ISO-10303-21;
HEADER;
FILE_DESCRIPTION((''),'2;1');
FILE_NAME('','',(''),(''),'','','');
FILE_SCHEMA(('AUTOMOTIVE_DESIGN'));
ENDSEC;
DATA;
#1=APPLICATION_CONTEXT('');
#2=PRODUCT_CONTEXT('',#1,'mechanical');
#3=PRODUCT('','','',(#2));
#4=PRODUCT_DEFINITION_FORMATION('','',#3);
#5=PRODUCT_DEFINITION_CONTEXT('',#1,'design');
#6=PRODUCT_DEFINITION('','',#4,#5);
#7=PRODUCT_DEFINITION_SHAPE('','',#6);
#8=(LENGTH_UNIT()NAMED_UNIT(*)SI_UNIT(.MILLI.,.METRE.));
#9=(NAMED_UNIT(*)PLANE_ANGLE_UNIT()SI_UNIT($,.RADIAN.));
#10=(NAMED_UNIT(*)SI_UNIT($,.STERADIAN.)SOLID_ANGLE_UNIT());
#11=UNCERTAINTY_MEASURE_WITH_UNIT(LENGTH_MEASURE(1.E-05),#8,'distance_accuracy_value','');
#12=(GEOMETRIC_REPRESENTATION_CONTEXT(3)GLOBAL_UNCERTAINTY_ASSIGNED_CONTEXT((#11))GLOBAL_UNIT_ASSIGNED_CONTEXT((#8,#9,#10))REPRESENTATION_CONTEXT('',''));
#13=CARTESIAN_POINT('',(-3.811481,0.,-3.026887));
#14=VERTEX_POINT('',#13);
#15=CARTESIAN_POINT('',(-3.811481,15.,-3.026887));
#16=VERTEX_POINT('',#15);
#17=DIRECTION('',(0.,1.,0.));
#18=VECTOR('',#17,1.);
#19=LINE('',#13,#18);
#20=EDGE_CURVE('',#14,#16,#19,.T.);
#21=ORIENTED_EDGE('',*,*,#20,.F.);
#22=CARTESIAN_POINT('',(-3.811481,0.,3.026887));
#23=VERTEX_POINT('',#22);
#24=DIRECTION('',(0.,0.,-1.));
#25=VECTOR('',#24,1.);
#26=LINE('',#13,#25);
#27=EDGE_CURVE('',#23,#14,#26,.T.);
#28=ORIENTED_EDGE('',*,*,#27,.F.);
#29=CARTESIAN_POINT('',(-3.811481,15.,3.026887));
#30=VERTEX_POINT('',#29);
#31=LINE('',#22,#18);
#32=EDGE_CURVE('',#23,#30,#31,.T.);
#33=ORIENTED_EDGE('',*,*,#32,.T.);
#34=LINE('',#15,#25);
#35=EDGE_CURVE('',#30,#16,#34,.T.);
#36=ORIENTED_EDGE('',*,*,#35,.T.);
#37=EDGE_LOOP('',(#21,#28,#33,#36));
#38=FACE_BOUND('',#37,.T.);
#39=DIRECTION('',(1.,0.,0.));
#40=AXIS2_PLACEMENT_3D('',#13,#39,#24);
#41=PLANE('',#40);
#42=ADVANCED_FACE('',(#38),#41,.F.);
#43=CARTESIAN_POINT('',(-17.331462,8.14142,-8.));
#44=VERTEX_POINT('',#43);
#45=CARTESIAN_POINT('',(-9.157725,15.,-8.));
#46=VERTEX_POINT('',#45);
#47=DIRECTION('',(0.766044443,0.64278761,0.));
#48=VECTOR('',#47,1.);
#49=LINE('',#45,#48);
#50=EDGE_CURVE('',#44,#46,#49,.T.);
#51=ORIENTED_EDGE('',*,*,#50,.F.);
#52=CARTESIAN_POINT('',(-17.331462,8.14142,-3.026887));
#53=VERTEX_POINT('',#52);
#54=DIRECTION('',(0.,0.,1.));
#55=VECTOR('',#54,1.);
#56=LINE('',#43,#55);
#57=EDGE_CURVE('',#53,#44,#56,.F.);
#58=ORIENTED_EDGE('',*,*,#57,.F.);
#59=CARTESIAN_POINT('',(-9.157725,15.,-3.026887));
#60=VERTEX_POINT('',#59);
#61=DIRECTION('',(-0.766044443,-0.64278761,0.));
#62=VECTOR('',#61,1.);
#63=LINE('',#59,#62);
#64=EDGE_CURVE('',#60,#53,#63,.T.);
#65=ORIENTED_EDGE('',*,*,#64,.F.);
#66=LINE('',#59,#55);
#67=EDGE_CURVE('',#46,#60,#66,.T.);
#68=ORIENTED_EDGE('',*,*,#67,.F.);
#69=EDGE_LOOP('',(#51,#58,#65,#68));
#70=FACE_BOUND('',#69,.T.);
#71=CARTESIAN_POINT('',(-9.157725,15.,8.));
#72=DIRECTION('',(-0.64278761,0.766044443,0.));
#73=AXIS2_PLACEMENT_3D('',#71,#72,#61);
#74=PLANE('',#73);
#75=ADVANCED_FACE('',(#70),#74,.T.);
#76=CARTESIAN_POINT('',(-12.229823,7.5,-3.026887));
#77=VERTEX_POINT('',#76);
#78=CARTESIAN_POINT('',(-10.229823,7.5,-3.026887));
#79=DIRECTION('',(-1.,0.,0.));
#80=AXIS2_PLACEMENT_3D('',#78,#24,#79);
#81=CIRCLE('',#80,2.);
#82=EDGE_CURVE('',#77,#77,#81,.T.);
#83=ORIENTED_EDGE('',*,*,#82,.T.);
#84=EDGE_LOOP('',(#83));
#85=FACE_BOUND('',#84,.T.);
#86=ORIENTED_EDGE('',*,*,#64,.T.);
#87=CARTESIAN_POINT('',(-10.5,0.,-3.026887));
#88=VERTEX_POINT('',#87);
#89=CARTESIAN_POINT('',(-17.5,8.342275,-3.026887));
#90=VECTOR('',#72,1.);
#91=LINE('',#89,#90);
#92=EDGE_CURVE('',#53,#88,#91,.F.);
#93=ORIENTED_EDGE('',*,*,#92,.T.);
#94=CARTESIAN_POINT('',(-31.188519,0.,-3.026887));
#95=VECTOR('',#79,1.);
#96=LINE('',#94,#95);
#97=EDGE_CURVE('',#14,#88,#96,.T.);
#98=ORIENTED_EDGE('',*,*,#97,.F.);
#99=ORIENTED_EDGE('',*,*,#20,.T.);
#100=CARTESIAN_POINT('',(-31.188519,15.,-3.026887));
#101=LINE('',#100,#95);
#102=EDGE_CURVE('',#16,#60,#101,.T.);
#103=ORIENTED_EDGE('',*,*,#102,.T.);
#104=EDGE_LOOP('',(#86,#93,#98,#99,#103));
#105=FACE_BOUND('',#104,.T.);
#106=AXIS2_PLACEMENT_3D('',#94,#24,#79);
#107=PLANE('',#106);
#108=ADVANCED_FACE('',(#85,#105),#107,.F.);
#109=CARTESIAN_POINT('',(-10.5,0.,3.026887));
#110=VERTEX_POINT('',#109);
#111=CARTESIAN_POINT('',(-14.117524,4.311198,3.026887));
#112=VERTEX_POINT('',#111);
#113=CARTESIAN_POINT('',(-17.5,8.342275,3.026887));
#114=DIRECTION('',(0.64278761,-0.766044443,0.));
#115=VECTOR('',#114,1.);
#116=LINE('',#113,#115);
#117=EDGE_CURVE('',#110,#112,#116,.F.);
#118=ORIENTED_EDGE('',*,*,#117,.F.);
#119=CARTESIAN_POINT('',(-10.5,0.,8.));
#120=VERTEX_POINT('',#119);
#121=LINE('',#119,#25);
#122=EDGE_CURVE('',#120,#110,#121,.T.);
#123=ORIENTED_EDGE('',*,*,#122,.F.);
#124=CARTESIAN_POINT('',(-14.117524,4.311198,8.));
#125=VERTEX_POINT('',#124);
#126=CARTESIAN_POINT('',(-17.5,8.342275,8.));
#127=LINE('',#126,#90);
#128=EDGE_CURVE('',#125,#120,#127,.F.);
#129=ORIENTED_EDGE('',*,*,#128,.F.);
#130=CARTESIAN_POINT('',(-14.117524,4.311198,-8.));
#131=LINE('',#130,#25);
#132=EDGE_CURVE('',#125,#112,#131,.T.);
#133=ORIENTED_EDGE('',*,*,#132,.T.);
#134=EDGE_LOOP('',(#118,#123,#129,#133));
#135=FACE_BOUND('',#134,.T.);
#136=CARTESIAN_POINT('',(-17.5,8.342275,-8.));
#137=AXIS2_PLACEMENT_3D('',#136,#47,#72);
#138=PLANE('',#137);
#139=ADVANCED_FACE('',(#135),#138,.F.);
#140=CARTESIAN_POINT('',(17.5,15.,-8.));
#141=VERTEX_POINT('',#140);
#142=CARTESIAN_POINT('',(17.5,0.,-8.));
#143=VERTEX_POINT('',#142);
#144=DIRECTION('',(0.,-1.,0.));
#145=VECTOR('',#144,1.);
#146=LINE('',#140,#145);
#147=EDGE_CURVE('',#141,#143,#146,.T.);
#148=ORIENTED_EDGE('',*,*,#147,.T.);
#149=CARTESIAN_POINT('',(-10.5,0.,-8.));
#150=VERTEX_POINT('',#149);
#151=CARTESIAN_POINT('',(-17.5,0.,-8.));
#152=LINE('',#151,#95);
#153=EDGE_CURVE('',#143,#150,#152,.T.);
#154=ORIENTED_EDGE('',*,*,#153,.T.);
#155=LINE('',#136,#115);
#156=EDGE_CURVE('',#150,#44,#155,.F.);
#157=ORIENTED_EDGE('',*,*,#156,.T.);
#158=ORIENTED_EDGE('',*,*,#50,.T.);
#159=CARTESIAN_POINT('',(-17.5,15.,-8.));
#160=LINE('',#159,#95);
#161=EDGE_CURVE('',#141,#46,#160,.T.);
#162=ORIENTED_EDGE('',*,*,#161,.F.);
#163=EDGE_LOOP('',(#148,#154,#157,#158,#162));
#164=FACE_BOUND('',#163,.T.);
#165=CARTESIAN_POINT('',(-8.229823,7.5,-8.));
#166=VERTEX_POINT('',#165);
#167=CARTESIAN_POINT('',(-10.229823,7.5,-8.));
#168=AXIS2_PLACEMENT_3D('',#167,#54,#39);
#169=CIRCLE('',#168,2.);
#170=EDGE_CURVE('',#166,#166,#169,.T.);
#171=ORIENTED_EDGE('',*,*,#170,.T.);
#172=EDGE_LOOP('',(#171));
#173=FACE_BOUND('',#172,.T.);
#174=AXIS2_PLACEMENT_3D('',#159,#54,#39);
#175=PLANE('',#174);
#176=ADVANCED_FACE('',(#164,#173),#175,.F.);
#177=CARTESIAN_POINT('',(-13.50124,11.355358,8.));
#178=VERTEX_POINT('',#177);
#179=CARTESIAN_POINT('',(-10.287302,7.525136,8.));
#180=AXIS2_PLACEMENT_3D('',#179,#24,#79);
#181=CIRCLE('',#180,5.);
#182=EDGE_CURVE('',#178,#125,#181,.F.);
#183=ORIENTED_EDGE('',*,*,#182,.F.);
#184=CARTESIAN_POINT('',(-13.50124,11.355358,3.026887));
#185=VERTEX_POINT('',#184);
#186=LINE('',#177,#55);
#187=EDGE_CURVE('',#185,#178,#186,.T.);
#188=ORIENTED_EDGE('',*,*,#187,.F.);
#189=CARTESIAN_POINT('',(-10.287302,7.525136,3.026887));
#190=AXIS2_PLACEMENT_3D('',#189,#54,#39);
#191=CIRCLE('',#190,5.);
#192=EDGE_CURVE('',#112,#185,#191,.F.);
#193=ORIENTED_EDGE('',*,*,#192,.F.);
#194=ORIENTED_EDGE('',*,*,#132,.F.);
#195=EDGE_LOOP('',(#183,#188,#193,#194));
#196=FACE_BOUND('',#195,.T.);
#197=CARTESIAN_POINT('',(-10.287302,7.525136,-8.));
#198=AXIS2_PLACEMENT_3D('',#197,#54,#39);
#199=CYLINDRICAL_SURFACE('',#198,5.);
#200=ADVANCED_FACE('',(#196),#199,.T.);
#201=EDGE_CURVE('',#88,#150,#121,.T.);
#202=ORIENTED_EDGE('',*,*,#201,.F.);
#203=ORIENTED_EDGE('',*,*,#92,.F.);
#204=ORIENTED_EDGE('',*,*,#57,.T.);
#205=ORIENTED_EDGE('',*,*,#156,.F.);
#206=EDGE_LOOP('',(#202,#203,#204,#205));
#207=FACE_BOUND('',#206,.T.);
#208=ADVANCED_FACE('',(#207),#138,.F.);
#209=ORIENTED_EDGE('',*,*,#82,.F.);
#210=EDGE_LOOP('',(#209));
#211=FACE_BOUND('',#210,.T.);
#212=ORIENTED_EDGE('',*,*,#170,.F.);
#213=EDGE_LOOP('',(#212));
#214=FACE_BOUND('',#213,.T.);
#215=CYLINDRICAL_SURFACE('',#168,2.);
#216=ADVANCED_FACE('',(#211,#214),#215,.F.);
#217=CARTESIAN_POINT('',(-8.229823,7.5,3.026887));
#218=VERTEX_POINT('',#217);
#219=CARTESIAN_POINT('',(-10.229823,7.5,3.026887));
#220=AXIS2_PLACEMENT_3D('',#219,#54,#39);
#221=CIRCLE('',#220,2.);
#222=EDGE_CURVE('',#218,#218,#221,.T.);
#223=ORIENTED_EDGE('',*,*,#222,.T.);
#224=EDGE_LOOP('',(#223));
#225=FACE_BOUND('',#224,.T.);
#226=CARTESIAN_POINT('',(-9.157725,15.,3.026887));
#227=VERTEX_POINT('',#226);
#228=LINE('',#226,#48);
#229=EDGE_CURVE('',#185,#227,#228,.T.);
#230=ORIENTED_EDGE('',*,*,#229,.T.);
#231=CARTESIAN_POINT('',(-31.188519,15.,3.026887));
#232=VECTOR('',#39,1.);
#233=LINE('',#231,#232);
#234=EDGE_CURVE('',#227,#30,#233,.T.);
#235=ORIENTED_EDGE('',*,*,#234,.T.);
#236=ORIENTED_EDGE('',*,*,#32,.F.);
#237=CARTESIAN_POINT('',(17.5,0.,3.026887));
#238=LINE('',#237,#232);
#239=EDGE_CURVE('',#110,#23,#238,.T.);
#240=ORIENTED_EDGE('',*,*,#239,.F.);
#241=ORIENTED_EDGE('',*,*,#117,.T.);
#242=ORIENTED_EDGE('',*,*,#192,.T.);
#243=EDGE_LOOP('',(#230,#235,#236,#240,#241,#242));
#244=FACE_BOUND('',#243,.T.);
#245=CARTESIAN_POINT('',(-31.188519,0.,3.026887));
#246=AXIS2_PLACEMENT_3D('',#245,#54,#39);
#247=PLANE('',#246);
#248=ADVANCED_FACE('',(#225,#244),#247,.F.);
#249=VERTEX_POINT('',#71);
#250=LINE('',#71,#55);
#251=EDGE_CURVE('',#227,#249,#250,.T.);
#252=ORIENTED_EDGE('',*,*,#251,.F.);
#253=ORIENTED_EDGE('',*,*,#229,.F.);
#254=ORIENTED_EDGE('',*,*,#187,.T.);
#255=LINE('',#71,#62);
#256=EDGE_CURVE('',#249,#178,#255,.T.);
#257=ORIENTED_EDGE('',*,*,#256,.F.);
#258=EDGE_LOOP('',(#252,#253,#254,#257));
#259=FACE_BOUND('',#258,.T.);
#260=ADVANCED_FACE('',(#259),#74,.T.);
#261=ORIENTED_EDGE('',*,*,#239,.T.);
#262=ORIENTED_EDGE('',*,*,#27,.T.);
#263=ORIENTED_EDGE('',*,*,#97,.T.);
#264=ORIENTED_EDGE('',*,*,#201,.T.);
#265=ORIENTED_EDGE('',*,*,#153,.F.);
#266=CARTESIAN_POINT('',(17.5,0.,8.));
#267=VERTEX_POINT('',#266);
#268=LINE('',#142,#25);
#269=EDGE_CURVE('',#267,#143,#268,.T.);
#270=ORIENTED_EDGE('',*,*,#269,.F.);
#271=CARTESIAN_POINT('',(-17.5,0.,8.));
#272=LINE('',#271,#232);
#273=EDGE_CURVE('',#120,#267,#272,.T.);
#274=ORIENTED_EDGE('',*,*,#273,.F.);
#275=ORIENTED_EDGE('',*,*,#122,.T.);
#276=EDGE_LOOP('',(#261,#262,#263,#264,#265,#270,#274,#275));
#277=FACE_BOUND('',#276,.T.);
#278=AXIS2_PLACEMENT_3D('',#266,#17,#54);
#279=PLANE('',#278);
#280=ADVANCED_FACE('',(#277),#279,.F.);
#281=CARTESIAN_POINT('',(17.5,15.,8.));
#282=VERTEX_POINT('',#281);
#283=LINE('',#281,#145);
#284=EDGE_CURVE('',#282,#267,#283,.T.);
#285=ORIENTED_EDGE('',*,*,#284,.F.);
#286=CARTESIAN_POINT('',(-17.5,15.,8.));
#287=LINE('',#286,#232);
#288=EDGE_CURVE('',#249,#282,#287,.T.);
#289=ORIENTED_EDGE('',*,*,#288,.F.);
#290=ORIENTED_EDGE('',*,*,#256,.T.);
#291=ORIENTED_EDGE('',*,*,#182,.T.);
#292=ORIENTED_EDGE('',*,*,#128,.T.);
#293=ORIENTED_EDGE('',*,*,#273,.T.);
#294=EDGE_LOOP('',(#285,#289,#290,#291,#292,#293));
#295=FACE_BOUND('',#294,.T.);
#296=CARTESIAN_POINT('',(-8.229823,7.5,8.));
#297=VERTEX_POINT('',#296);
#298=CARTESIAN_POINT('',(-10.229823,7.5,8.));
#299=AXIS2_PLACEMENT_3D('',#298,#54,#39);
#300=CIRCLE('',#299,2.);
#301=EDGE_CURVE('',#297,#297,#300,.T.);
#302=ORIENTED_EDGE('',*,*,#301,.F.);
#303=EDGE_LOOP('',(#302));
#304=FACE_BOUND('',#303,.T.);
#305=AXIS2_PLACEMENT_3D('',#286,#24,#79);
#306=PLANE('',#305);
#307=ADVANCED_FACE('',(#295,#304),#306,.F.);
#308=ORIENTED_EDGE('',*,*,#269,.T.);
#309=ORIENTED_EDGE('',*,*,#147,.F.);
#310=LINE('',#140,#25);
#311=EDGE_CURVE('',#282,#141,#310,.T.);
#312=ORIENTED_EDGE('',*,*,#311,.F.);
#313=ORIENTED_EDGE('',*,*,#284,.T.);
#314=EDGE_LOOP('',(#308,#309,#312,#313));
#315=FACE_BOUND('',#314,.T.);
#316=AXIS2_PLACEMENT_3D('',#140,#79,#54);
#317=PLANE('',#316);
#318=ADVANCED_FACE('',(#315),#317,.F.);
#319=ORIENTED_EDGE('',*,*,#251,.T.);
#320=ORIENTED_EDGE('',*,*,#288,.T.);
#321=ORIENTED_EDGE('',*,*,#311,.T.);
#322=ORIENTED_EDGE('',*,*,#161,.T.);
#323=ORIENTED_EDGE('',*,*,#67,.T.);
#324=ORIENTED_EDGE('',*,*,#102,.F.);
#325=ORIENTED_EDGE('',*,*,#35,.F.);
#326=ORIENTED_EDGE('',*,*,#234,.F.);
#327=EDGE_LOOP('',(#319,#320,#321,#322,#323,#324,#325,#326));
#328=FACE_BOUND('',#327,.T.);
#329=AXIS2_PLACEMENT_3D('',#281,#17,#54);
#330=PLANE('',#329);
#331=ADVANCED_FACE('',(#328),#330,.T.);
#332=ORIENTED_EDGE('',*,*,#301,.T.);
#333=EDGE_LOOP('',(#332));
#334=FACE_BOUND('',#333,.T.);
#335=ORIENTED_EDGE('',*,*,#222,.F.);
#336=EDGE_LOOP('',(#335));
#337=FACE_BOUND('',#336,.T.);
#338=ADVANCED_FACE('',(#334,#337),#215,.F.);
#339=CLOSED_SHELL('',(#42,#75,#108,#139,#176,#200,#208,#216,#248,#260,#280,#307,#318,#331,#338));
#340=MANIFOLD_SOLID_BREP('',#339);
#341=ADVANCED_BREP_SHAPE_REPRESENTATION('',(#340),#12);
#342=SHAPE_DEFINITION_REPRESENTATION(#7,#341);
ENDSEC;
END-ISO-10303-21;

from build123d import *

# Parameters (mm, degrees)
SKETCH_1_W          = 35
SKETCH_1_H          = 16
EXTRUDE_1_DEPTH     = 15
SKETCH_2_W          = 27.377038818
SKETCH_2_H          = 6.053774878
CUT_EXTRUDE_2_DEPTH = 25.397745798
SKETCH_3_R          = 2
CUT_EXTRUDE_3_DEPTH = 29.057975693
CHAMFER_1_SIZE      = 8.342275148
CHAMFER_1_SIZE_2    = 7
FILLET_1_R          = 5


with BuildPart() as part:
    # Эскиз1 → Вытянуть1 (new body)
    with BuildSketch(Plane(origin=(0, 0, 0), x_dir=(1, 0, 0), z_dir=(0, 1, 0))):
        Rectangle(SKETCH_1_W, SKETCH_1_H)
    extrude(amount=EXTRUDE_1_DEPTH)

    # Эскиз2 → Вытянуть2 (cut, through all)
    with BuildSketch(Plane(origin=(0, 15, 0), x_dir=(1, 0, 0), z_dir=(0, 1, 0))):
        with Locations((-17.5, 0)):
            Rectangle(SKETCH_2_W, SKETCH_2_H)
    extrude(amount=-CUT_EXTRUDE_2_DEPTH, mode=Mode.SUBTRACT)

    # Эскиз3 → Вытянуть3 (cut, through all)
    with BuildSketch(Plane.XY.offset(8)):
        with Locations((-10.229823295, 7.5)):
            Circle(SKETCH_3_R)
    extrude(amount=-CUT_EXTRUDE_3_DEPTH, mode=Mode.SUBTRACT)

    # Фаска1
    # the kernel refuses this chamfer: 8.342275148, 7 mm, written as the material it takes off along each edge
    with BuildSketch(Plane(origin=(-17.5, 0, 18.474543444), x_dir=(-0.024939322090234327, 0.9996889667359942, 0), z_dir=(0, 0, -1)), Plane(origin=(-17.5, 15, 29.501430883), x_dir=(0.9996889667359942, 0.024939322090234327, 0), z_dir=(0, 0, -1))) as chamfer_1_piece_1:
        Polygon((CHAMFER_1_SIZE * 0.999688966755, CHAMFER_1_SIZE * 0.0249393220907), (-CHAMFER_1_SIZE_2 * 0.0249393220902, CHAMFER_1_SIZE_2 * 0.999688966736), (0, 0), align=None)
    extrude(amount=47.975974327, mode=Mode.SUBTRACT)
    with BuildSketch(Plane(origin=(-17.5, 0, 29.501430883), x_dir=(0.9993728857116146, -0.03540953691366304, 0), z_dir=(0, 0, -1)), Plane(origin=(-17.5, 15, 18.474543444), x_dir=(-0.035409536913663095, -0.9993728857116146, 0), z_dir=(0, 0, -1))) as chamfer_1_piece_2:
        Polygon((CHAMFER_1_SIZE_2 * 0.999372885712, -CHAMFER_1_SIZE_2 * 0.0354095369137), (-CHAMFER_1_SIZE * 0.0354095369143, -CHAMFER_1_SIZE * 0.999372885731), (0, 0), align=None)
    extrude(amount=47.975974327, mode=Mode.SUBTRACT)

    # Скругление1
    fillet_1_edges = [part.edges().sort_by_distance(p)[0] for p in [
        (-17.33146239, 8.141419846, 5.513443719),
    ]]
    fillet(fillet_1_edges, radius=FILLET_1_R)


solid = part.part
